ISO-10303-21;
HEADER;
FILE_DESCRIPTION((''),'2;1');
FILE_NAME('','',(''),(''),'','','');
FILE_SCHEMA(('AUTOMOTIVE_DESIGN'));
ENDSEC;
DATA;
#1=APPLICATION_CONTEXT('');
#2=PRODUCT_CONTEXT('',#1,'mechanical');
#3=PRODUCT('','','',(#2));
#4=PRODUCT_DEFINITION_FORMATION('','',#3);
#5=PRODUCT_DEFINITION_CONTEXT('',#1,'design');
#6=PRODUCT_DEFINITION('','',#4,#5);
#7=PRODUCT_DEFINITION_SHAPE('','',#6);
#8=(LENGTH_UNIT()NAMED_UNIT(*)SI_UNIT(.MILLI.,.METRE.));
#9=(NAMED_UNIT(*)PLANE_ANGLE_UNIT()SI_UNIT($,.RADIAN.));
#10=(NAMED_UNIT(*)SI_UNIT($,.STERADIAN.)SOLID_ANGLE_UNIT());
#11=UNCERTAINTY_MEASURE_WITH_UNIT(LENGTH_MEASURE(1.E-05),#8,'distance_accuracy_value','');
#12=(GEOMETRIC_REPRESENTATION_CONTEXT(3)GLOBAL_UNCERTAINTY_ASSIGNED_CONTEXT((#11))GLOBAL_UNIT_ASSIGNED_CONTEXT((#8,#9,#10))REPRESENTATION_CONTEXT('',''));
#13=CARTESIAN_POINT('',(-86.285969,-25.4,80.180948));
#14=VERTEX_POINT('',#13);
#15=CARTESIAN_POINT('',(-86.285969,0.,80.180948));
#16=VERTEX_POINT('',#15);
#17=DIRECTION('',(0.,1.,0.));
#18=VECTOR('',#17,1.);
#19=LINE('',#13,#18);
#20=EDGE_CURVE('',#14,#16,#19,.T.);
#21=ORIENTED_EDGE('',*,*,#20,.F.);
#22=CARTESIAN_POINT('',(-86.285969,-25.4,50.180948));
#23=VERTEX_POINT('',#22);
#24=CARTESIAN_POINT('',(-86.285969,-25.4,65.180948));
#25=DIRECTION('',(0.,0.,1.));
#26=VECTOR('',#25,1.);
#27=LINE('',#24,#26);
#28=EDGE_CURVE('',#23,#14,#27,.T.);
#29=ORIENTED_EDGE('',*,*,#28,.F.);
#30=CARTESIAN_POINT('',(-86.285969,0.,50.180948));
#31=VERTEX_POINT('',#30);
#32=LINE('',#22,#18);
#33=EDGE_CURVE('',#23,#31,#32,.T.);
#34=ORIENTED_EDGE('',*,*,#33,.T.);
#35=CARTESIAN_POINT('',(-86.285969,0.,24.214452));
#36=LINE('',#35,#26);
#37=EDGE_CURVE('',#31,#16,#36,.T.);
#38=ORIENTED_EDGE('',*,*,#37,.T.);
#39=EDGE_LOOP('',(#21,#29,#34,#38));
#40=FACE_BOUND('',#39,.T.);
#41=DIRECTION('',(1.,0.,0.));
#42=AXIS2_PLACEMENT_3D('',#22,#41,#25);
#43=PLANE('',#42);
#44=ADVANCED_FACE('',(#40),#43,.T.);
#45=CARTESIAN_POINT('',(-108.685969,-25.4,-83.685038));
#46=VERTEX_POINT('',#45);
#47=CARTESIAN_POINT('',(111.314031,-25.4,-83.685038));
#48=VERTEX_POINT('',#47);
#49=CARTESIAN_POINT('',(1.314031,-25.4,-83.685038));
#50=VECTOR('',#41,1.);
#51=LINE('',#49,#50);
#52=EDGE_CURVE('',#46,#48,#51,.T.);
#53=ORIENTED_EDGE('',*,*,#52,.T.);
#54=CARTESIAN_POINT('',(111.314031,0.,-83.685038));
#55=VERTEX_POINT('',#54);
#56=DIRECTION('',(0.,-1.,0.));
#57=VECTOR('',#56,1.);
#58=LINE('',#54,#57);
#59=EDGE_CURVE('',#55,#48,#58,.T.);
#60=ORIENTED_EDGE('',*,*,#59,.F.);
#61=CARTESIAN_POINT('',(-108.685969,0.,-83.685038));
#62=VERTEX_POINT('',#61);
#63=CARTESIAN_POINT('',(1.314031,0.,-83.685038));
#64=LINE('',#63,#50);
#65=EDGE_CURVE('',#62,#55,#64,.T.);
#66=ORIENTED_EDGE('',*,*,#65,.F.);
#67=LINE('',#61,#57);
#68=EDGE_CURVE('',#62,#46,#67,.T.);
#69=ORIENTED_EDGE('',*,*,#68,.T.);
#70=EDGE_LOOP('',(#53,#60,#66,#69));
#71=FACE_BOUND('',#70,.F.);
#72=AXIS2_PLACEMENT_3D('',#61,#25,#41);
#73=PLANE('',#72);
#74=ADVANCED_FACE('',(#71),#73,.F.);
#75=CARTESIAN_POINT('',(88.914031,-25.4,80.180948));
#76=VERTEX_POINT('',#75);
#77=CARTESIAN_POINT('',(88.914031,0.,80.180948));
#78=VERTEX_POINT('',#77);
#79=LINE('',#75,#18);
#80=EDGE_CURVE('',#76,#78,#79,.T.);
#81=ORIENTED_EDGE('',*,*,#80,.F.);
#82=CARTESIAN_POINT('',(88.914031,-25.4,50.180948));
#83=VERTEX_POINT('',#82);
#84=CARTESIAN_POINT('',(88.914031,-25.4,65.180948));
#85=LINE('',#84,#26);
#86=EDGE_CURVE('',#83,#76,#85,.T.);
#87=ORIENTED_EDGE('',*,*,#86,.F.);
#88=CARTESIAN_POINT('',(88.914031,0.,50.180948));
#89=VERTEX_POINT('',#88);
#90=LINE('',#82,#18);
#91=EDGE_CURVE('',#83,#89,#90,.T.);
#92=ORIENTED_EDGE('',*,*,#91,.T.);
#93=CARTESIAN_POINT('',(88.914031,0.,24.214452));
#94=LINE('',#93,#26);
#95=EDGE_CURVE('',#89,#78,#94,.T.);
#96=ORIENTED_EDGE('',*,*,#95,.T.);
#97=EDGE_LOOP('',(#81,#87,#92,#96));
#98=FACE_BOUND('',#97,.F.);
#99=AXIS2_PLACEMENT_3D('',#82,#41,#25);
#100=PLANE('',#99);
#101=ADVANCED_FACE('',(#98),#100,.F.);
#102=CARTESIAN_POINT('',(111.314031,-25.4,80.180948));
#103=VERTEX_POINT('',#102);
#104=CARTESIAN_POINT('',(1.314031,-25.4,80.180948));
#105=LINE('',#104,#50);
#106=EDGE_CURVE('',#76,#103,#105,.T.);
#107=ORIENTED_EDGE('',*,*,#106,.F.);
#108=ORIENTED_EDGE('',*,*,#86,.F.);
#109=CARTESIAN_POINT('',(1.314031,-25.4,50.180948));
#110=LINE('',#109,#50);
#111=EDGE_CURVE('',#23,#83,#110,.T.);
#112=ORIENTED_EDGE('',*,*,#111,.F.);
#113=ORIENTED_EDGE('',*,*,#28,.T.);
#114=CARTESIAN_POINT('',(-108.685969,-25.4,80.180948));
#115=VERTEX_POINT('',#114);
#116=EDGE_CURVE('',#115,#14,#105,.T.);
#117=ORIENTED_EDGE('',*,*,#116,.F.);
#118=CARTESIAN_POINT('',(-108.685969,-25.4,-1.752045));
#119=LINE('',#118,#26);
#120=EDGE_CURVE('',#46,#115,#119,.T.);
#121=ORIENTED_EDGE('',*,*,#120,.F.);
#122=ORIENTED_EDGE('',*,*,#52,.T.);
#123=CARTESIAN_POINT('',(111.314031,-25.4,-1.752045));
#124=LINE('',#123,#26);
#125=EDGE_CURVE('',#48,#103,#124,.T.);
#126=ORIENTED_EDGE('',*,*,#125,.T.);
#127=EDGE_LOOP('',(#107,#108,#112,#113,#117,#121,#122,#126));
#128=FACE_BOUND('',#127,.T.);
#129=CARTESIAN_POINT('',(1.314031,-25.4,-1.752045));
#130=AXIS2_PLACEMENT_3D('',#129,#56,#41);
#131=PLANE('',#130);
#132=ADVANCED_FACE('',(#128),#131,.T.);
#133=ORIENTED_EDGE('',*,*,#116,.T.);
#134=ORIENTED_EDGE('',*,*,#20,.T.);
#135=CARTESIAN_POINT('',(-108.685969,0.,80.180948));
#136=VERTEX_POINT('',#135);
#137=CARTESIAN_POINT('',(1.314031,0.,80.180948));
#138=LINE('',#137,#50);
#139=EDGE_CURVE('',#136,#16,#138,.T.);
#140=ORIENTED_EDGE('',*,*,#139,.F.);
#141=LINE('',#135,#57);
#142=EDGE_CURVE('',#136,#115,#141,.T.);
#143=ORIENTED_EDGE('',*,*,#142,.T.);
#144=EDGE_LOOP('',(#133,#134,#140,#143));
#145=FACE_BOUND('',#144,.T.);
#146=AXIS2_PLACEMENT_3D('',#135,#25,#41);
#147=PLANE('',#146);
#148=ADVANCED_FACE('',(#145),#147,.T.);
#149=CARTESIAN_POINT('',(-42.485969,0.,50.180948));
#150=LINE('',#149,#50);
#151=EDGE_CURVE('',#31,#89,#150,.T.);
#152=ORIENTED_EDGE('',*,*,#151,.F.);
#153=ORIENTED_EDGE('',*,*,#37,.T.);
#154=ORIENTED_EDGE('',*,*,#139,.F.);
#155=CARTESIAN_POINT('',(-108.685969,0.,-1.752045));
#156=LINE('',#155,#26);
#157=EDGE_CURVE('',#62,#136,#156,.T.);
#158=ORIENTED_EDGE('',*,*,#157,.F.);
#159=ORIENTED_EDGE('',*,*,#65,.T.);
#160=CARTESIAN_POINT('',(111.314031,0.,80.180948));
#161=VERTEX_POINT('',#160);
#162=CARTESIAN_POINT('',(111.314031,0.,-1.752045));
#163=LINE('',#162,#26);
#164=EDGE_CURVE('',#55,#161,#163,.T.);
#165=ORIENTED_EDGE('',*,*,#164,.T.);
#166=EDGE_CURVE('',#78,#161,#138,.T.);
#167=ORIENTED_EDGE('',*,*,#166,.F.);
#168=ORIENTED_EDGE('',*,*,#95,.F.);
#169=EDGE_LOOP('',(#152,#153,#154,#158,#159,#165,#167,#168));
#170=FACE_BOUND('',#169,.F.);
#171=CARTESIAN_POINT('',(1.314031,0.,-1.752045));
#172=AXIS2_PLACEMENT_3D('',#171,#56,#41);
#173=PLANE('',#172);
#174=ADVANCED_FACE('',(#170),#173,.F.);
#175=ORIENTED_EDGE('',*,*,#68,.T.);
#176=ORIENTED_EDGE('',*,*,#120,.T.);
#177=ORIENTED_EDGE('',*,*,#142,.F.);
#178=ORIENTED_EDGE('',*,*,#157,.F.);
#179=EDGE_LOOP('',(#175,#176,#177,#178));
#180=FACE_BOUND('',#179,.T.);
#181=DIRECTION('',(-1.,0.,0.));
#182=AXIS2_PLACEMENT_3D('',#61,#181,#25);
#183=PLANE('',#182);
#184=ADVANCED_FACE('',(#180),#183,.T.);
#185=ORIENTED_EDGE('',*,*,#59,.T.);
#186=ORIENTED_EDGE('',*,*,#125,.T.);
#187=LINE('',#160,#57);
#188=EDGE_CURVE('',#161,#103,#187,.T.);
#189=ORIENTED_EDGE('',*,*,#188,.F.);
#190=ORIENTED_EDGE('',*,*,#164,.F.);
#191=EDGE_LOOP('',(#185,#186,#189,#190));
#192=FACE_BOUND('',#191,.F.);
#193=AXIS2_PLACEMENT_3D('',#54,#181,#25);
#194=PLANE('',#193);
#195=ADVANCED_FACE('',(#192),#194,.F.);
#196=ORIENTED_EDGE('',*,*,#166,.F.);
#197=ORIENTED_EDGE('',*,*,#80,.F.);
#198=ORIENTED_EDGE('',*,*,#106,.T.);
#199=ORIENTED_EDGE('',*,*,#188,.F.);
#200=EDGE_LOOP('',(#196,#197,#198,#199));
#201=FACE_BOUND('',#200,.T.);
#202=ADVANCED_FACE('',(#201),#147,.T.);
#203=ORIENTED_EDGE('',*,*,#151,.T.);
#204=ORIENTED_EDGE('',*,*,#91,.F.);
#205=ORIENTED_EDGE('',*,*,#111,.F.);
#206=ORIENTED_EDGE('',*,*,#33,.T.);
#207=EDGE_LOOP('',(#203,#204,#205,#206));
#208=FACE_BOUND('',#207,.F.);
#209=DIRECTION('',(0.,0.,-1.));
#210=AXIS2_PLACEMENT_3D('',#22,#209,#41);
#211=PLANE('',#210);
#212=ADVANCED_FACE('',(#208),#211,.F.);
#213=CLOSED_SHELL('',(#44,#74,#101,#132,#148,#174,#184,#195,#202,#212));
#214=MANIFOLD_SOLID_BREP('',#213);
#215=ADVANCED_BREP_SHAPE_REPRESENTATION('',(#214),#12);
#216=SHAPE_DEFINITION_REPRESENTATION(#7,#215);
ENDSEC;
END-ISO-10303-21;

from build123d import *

# Parameters (mm, degrees)
F0_W     = 220
F0_H     = 163.86598641
F1_DEPTH = 25.4
F2_W     = 175.2
F2_H     = 30
F3_DEPTH = 57.15


# Not quite as in the source:
# - a feature names something its author has since deleted; it is built from what else it names


with BuildPart() as f1:
    # F0 (on Front) → F1 (new body)
    with BuildSketch(Plane.XZ):
        with Locations((1.3140309602, -1.7520450056)):
            Rectangle(F0_W, F0_H)
    extrude(amount=F1_DEPTH)

    # F2 (on face) → F3 (cut)
    with BuildSketch(Plane.XZ.offset(25.4)):
        with Locations((1.3140309602, 65.1809481994)):
            Rectangle(F2_W, F2_H)
    extrude(amount=-F3_DEPTH, mode=Mode.SUBTRACT)


solid = f1.part
